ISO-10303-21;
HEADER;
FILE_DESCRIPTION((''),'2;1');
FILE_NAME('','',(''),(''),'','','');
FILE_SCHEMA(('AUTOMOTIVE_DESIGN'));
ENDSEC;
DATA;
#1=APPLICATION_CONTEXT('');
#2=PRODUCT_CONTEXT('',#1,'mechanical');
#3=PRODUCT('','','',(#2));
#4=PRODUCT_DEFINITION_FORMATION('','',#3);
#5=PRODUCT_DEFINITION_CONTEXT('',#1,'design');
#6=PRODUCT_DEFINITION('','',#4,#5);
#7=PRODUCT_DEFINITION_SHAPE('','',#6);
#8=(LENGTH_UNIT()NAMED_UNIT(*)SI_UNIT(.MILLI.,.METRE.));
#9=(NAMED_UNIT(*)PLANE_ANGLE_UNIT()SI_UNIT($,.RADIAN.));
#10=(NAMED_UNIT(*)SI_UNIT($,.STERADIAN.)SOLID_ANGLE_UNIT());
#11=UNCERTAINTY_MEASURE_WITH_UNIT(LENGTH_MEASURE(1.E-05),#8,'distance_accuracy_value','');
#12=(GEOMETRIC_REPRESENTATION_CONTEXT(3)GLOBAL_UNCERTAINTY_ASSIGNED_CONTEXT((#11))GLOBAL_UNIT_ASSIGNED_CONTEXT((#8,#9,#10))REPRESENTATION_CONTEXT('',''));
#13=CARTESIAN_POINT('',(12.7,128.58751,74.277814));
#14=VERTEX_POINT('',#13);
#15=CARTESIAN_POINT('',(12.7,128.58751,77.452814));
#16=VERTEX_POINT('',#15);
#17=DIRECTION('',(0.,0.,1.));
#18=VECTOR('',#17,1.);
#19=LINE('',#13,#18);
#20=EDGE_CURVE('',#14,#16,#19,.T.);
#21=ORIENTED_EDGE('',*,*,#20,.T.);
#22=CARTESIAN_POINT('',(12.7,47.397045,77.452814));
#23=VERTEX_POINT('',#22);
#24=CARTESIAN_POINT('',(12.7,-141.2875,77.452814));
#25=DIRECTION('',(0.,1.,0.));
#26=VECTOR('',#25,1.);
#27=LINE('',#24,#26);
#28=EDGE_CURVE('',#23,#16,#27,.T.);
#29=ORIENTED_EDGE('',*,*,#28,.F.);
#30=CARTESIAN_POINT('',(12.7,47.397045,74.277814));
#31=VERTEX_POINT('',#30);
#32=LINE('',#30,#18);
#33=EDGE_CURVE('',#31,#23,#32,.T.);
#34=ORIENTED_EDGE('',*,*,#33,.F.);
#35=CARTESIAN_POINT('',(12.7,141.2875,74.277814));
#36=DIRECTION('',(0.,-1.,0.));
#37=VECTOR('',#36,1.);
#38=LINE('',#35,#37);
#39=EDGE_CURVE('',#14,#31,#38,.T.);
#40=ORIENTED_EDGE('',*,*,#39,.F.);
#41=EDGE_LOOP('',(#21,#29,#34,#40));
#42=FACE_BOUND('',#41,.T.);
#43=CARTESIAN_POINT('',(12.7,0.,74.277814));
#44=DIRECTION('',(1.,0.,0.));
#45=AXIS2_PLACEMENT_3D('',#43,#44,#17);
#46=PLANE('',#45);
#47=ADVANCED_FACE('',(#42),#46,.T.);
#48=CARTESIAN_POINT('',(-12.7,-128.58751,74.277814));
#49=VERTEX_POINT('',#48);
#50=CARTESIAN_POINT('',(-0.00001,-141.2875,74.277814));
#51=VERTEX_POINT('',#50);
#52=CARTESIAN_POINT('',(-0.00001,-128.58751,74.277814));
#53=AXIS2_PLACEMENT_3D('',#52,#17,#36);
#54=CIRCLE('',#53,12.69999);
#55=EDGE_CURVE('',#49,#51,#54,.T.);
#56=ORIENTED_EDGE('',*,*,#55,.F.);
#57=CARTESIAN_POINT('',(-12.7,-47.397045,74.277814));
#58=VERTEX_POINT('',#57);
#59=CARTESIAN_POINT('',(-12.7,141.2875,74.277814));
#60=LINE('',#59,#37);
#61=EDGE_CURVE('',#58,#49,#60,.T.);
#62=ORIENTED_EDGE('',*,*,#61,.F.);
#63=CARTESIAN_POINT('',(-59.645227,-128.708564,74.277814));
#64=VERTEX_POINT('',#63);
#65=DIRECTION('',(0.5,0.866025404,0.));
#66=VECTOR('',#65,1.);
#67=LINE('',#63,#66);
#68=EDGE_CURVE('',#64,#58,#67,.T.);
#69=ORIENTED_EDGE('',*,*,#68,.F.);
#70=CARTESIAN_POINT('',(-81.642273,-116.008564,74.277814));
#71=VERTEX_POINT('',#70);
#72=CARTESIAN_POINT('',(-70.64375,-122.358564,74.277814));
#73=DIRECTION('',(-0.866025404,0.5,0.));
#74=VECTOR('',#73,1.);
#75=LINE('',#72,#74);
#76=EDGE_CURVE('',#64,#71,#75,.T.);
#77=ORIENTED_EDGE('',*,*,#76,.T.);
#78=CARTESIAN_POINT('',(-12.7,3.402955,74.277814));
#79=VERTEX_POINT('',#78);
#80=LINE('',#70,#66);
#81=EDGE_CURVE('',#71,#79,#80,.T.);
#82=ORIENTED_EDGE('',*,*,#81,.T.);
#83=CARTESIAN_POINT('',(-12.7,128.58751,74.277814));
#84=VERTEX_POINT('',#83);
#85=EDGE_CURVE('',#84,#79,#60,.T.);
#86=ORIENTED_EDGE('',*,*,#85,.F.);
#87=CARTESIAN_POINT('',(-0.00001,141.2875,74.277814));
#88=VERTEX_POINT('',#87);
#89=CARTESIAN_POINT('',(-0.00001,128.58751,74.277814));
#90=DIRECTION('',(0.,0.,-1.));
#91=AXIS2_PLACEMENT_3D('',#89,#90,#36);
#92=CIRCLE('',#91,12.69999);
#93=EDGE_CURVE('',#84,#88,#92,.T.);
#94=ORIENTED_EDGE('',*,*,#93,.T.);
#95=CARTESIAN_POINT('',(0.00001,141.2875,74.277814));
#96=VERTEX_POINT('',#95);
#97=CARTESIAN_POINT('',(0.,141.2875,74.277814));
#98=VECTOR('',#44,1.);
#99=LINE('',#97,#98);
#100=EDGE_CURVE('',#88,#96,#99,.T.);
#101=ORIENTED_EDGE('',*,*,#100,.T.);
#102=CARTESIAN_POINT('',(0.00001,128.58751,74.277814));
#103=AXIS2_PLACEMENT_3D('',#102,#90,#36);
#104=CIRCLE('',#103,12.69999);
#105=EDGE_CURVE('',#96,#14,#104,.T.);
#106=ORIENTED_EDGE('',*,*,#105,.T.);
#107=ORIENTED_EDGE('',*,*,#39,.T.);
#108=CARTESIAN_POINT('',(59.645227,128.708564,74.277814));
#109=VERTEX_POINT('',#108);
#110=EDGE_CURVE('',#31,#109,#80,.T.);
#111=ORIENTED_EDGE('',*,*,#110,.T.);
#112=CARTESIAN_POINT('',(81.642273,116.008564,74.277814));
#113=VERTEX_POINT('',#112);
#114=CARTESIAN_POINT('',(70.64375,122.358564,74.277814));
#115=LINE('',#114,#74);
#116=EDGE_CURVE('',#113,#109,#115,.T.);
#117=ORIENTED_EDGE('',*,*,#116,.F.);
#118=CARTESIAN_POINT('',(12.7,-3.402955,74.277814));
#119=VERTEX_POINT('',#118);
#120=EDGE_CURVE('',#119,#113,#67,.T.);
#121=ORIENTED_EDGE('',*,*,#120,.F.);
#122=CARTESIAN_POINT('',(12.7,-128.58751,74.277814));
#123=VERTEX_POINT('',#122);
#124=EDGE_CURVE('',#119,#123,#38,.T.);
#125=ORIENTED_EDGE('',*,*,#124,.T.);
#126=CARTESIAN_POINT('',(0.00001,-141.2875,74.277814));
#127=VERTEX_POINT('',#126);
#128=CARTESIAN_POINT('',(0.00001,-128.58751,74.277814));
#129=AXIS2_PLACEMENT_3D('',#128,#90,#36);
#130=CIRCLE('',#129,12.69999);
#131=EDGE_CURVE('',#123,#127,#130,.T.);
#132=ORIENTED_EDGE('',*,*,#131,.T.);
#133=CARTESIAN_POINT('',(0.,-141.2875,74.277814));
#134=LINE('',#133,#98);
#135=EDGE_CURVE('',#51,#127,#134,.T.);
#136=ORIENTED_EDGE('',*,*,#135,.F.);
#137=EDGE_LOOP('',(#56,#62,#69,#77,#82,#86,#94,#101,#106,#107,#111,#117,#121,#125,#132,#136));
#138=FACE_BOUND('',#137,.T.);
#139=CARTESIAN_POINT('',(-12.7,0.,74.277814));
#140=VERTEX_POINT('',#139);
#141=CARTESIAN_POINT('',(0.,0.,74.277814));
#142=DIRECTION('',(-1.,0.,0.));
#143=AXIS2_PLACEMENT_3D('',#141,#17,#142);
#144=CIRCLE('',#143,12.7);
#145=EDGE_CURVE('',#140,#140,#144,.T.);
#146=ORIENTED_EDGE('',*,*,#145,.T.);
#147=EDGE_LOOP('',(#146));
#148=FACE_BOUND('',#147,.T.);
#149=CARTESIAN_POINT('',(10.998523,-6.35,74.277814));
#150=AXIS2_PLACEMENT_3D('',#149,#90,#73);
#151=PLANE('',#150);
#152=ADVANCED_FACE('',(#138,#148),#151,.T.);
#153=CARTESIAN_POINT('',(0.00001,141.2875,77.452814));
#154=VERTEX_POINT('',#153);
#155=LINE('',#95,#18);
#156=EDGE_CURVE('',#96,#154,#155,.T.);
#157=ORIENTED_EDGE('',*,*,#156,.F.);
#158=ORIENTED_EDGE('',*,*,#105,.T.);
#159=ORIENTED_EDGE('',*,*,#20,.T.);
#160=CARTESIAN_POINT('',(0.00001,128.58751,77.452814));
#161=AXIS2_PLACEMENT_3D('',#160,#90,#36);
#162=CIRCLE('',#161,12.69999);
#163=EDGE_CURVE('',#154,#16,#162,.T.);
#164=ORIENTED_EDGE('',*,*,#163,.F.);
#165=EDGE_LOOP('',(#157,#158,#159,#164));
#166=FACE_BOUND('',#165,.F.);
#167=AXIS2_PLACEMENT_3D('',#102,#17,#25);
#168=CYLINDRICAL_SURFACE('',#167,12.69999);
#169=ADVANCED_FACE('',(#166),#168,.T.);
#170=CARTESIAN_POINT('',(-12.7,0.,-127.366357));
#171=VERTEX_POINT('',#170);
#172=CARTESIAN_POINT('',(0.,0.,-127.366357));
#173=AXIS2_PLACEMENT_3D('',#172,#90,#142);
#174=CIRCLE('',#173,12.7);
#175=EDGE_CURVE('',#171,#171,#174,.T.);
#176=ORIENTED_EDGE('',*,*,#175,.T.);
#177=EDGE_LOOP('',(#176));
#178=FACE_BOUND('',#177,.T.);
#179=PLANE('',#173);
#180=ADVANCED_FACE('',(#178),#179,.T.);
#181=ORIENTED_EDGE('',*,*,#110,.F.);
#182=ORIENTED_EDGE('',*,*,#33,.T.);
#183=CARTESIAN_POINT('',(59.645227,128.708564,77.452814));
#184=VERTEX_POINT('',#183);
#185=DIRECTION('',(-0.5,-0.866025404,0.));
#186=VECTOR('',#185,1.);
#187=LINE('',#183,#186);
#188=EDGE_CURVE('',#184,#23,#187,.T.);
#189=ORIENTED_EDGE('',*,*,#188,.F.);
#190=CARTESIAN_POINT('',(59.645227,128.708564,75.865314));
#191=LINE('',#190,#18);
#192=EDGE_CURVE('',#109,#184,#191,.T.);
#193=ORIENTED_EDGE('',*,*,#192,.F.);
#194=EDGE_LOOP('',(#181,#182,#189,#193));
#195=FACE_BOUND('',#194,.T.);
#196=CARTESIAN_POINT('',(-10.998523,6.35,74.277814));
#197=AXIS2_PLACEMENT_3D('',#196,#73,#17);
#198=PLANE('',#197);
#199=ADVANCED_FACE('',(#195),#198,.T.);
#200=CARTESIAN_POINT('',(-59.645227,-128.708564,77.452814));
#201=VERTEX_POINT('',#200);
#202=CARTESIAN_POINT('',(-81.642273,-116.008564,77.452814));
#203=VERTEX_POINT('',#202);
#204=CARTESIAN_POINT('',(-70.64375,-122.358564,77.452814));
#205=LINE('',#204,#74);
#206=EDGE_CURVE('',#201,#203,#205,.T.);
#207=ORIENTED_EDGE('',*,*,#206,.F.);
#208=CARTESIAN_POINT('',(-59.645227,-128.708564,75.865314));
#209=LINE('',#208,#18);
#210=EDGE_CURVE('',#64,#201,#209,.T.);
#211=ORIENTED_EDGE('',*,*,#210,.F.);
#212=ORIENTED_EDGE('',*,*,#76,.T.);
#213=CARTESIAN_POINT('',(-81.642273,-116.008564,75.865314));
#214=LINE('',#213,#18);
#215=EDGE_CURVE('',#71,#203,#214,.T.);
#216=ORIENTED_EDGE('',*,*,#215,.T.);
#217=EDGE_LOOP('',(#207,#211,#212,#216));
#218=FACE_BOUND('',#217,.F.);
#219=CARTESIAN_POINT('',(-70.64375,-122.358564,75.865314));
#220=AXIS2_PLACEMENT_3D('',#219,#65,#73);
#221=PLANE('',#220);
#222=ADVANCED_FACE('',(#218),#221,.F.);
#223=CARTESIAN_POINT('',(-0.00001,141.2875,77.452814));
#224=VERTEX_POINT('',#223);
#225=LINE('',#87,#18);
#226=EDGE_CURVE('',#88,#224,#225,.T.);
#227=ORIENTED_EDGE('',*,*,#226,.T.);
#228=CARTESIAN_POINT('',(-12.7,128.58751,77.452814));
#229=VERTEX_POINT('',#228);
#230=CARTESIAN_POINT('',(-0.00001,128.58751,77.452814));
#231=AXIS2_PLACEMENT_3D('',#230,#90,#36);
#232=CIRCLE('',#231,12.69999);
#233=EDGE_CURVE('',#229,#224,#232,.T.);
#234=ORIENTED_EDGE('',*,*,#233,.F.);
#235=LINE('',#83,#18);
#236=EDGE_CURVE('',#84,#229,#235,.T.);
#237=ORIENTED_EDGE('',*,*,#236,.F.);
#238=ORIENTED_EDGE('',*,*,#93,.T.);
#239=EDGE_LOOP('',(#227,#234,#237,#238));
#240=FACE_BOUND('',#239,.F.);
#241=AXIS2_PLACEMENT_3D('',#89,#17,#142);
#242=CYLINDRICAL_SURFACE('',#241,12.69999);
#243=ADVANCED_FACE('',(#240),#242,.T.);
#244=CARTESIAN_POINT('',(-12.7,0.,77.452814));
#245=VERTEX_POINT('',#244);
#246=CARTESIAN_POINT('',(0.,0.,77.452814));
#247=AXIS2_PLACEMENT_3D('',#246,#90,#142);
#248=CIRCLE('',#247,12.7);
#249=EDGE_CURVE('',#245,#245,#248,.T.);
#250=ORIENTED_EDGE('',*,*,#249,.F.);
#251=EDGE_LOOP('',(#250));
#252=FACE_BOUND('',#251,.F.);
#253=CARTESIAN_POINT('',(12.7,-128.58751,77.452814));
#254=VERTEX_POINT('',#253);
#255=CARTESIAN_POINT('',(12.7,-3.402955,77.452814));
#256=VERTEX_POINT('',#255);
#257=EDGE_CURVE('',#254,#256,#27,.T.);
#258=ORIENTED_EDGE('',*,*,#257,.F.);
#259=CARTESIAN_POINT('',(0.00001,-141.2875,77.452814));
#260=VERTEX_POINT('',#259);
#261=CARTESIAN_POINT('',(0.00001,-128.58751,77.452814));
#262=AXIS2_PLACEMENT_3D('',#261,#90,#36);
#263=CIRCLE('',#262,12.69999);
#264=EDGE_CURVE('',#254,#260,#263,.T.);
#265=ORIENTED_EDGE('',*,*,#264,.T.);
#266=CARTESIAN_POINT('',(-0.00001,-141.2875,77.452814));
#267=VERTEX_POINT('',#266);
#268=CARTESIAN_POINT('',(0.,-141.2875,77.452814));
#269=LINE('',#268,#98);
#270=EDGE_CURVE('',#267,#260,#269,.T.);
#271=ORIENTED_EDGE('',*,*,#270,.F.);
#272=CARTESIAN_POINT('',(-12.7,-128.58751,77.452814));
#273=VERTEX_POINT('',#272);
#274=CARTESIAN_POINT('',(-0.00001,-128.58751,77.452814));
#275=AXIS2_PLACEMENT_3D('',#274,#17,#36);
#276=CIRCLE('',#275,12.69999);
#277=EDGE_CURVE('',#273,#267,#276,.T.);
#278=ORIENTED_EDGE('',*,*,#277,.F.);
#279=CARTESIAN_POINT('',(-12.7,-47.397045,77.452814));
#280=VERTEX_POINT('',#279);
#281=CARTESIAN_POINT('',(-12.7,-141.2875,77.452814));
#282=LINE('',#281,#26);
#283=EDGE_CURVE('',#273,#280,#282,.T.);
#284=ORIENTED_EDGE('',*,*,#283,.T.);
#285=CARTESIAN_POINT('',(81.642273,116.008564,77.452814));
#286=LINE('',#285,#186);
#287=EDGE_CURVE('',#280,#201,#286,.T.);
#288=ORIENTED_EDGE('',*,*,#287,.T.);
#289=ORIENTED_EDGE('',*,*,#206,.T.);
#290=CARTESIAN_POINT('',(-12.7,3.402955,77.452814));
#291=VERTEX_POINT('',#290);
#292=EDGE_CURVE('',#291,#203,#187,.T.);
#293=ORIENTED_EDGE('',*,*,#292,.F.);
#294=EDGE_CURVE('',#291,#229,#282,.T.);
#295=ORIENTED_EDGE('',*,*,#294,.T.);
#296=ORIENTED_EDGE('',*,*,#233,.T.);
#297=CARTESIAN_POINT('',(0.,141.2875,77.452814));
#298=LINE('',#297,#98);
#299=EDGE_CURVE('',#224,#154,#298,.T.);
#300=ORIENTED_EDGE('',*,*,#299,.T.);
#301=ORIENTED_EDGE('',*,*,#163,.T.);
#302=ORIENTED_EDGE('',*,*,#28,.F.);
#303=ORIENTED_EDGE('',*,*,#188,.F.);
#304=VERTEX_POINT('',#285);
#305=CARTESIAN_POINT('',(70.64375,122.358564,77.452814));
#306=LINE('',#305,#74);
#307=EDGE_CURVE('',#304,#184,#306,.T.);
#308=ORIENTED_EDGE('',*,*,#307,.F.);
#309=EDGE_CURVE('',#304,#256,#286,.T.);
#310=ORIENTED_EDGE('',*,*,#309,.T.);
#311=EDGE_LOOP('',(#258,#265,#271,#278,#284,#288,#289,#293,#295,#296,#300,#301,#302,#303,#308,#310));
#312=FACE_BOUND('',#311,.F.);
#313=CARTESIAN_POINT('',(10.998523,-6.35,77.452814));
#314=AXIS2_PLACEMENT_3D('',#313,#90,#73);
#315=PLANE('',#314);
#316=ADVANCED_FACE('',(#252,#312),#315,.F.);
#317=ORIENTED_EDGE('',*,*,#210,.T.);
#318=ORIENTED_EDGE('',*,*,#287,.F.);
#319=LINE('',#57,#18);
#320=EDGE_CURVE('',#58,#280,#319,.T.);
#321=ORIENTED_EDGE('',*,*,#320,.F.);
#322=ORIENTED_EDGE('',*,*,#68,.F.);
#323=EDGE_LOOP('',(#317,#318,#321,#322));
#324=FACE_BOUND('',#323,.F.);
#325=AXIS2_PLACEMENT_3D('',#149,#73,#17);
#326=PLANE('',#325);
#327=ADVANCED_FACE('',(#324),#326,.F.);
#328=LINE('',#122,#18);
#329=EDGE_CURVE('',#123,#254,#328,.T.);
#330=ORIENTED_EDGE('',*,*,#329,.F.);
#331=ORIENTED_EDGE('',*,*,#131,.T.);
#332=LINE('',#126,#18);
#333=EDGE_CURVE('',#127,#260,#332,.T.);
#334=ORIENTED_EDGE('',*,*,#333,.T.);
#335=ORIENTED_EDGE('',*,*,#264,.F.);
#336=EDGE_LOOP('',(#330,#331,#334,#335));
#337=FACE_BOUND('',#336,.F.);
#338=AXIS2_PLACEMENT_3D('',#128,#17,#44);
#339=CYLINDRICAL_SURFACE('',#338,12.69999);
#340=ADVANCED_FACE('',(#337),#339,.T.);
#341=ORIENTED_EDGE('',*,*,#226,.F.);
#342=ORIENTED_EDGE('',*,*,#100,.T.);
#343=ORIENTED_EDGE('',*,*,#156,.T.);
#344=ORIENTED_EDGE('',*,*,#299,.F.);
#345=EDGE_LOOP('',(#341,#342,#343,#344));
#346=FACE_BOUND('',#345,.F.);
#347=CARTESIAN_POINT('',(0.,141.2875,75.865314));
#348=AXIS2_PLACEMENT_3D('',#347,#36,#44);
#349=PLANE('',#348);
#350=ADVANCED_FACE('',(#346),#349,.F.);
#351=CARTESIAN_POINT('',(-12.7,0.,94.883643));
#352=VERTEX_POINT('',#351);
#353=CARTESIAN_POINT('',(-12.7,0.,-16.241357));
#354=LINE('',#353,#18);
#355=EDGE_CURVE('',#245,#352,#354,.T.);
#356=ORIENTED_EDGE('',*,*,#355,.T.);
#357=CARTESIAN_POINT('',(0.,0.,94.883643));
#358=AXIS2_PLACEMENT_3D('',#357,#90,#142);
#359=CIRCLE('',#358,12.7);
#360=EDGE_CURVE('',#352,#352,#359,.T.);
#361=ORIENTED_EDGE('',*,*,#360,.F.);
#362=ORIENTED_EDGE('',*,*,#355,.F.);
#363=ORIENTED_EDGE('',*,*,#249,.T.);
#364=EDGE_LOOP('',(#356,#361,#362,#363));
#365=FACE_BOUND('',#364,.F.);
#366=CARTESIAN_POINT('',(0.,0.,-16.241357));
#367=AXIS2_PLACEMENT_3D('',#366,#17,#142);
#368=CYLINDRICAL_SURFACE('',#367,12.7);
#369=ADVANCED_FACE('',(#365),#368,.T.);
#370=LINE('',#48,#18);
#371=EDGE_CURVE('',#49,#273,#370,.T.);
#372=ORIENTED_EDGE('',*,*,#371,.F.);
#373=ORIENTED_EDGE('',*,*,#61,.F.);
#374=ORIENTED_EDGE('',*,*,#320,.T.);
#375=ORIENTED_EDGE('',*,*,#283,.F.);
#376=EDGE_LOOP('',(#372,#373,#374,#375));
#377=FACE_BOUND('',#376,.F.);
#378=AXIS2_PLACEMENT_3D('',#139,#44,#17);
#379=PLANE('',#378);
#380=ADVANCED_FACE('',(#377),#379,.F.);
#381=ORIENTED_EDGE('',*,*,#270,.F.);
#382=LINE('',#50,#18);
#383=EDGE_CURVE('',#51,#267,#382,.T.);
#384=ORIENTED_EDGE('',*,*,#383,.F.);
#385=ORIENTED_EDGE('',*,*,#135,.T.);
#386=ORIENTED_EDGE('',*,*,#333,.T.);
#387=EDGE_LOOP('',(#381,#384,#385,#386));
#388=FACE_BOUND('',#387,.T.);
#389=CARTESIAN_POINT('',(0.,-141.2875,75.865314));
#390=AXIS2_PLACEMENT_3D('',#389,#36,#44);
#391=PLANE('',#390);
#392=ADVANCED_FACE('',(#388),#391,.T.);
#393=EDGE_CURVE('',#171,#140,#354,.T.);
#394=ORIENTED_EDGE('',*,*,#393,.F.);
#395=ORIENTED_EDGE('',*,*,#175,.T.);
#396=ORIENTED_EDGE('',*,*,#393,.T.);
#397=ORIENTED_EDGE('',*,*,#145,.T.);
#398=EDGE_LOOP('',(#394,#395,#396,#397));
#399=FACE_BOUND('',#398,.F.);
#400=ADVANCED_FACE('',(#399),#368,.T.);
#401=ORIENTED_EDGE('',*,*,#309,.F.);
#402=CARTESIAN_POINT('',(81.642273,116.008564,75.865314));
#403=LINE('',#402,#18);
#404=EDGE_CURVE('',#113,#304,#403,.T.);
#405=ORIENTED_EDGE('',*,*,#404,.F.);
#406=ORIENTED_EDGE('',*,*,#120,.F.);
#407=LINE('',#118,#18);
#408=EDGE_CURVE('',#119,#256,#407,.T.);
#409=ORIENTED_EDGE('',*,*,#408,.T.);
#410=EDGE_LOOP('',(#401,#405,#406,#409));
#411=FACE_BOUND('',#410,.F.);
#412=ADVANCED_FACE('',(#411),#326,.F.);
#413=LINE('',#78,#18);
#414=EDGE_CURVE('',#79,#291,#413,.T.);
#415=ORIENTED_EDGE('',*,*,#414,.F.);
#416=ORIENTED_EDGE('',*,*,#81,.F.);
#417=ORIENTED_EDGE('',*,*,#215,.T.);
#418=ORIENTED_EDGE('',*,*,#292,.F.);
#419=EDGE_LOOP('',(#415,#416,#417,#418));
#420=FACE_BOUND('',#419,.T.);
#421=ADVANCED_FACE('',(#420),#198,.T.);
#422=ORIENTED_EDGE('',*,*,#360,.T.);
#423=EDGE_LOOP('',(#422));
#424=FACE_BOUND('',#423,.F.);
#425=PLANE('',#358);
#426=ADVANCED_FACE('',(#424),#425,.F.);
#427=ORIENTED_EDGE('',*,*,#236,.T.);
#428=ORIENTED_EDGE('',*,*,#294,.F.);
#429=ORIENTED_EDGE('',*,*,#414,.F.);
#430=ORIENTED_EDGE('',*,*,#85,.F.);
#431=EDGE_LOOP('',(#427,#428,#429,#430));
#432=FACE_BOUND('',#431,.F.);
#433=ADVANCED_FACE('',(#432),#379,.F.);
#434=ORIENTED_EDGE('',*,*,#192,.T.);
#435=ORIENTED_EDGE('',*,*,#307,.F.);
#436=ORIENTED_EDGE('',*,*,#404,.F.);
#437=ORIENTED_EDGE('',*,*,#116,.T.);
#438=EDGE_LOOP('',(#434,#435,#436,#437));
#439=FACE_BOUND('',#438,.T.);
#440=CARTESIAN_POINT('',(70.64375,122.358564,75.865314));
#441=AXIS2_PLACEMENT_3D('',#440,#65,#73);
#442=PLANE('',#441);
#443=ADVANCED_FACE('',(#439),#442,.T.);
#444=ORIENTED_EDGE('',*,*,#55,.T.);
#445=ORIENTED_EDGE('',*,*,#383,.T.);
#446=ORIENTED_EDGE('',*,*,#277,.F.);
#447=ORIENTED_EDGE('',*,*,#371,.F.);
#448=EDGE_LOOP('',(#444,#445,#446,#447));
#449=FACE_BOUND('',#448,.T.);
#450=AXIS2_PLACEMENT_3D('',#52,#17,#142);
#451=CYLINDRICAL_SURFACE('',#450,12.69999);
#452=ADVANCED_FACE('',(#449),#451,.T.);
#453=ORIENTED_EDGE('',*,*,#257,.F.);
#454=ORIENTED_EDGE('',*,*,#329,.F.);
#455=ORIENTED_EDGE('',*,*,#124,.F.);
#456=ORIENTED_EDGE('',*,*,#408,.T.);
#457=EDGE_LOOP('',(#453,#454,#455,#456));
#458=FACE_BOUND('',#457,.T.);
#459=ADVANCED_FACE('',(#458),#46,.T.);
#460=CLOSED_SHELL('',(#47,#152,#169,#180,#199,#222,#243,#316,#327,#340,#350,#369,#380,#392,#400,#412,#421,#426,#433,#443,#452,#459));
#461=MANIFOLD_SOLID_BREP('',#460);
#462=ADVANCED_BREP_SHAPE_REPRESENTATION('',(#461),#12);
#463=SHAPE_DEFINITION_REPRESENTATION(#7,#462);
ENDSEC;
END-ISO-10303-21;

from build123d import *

# Parameters (mm, degrees)
F0_W     = 12.7
F0_H     = 222.25
F3_W     = 25.4
F3_H     = 3.175
F4_DEPTH = 141.2875
F6_R     = 12.69999
F8_W     = 25.4
F8_H     = 3.175
F9_DEPTH = 141.2875


# Not quite as in the source:
# - a fillet or chamfer is up to 0.001 mm smaller than in the source, because OpenCascade refuses the exact size


with BuildPart() as f1:
    # F0 (on Front) → F1 (revolve)
    with BuildSketch(Plane.XZ):
        with Locations((-6.35, -16.2413566351)):
            Rectangle(F0_W, F0_H)
    revolve(axis=Axis((0, 0, -16.2413566351), (0, 0, -1)))

    # F3 (on Front) → F4 (join, symmetric)
    with BuildSketch(Plane.XZ):
        with Locations((0, 75.8653144777)):
            Rectangle(F3_W, F3_H)
    extrude(amount=F4_DEPTH, both=True)

    # F6 (radius 12.7 in the source; OpenCascade refuses exactly that, so slightly less here)
    f6_edges = [f1.edges().sort_by_distance(p)[0] for p in [
        (12.7, 141.2875, 75.865314),
        (-12.7, 141.2875, 75.865314),
        (-12.7, -141.2875, 75.865314),
        (12.7, -141.2875, 75.865314),
    ]]
    fillet(f6_edges, radius=F6_R)

    # F8 (on line) → F9 (join, symmetric)
    with BuildSketch(Plane(origin=(0, 0, 0), x_dir=(-0.8660254038, 0.5, 0), z_dir=(0.5, 0.8660254038, 0))):
        with Locations((0, 75.8653144777)):
            Rectangle(F8_W, F8_H)
    extrude(amount=F9_DEPTH, both=True)


solid = f1.part
